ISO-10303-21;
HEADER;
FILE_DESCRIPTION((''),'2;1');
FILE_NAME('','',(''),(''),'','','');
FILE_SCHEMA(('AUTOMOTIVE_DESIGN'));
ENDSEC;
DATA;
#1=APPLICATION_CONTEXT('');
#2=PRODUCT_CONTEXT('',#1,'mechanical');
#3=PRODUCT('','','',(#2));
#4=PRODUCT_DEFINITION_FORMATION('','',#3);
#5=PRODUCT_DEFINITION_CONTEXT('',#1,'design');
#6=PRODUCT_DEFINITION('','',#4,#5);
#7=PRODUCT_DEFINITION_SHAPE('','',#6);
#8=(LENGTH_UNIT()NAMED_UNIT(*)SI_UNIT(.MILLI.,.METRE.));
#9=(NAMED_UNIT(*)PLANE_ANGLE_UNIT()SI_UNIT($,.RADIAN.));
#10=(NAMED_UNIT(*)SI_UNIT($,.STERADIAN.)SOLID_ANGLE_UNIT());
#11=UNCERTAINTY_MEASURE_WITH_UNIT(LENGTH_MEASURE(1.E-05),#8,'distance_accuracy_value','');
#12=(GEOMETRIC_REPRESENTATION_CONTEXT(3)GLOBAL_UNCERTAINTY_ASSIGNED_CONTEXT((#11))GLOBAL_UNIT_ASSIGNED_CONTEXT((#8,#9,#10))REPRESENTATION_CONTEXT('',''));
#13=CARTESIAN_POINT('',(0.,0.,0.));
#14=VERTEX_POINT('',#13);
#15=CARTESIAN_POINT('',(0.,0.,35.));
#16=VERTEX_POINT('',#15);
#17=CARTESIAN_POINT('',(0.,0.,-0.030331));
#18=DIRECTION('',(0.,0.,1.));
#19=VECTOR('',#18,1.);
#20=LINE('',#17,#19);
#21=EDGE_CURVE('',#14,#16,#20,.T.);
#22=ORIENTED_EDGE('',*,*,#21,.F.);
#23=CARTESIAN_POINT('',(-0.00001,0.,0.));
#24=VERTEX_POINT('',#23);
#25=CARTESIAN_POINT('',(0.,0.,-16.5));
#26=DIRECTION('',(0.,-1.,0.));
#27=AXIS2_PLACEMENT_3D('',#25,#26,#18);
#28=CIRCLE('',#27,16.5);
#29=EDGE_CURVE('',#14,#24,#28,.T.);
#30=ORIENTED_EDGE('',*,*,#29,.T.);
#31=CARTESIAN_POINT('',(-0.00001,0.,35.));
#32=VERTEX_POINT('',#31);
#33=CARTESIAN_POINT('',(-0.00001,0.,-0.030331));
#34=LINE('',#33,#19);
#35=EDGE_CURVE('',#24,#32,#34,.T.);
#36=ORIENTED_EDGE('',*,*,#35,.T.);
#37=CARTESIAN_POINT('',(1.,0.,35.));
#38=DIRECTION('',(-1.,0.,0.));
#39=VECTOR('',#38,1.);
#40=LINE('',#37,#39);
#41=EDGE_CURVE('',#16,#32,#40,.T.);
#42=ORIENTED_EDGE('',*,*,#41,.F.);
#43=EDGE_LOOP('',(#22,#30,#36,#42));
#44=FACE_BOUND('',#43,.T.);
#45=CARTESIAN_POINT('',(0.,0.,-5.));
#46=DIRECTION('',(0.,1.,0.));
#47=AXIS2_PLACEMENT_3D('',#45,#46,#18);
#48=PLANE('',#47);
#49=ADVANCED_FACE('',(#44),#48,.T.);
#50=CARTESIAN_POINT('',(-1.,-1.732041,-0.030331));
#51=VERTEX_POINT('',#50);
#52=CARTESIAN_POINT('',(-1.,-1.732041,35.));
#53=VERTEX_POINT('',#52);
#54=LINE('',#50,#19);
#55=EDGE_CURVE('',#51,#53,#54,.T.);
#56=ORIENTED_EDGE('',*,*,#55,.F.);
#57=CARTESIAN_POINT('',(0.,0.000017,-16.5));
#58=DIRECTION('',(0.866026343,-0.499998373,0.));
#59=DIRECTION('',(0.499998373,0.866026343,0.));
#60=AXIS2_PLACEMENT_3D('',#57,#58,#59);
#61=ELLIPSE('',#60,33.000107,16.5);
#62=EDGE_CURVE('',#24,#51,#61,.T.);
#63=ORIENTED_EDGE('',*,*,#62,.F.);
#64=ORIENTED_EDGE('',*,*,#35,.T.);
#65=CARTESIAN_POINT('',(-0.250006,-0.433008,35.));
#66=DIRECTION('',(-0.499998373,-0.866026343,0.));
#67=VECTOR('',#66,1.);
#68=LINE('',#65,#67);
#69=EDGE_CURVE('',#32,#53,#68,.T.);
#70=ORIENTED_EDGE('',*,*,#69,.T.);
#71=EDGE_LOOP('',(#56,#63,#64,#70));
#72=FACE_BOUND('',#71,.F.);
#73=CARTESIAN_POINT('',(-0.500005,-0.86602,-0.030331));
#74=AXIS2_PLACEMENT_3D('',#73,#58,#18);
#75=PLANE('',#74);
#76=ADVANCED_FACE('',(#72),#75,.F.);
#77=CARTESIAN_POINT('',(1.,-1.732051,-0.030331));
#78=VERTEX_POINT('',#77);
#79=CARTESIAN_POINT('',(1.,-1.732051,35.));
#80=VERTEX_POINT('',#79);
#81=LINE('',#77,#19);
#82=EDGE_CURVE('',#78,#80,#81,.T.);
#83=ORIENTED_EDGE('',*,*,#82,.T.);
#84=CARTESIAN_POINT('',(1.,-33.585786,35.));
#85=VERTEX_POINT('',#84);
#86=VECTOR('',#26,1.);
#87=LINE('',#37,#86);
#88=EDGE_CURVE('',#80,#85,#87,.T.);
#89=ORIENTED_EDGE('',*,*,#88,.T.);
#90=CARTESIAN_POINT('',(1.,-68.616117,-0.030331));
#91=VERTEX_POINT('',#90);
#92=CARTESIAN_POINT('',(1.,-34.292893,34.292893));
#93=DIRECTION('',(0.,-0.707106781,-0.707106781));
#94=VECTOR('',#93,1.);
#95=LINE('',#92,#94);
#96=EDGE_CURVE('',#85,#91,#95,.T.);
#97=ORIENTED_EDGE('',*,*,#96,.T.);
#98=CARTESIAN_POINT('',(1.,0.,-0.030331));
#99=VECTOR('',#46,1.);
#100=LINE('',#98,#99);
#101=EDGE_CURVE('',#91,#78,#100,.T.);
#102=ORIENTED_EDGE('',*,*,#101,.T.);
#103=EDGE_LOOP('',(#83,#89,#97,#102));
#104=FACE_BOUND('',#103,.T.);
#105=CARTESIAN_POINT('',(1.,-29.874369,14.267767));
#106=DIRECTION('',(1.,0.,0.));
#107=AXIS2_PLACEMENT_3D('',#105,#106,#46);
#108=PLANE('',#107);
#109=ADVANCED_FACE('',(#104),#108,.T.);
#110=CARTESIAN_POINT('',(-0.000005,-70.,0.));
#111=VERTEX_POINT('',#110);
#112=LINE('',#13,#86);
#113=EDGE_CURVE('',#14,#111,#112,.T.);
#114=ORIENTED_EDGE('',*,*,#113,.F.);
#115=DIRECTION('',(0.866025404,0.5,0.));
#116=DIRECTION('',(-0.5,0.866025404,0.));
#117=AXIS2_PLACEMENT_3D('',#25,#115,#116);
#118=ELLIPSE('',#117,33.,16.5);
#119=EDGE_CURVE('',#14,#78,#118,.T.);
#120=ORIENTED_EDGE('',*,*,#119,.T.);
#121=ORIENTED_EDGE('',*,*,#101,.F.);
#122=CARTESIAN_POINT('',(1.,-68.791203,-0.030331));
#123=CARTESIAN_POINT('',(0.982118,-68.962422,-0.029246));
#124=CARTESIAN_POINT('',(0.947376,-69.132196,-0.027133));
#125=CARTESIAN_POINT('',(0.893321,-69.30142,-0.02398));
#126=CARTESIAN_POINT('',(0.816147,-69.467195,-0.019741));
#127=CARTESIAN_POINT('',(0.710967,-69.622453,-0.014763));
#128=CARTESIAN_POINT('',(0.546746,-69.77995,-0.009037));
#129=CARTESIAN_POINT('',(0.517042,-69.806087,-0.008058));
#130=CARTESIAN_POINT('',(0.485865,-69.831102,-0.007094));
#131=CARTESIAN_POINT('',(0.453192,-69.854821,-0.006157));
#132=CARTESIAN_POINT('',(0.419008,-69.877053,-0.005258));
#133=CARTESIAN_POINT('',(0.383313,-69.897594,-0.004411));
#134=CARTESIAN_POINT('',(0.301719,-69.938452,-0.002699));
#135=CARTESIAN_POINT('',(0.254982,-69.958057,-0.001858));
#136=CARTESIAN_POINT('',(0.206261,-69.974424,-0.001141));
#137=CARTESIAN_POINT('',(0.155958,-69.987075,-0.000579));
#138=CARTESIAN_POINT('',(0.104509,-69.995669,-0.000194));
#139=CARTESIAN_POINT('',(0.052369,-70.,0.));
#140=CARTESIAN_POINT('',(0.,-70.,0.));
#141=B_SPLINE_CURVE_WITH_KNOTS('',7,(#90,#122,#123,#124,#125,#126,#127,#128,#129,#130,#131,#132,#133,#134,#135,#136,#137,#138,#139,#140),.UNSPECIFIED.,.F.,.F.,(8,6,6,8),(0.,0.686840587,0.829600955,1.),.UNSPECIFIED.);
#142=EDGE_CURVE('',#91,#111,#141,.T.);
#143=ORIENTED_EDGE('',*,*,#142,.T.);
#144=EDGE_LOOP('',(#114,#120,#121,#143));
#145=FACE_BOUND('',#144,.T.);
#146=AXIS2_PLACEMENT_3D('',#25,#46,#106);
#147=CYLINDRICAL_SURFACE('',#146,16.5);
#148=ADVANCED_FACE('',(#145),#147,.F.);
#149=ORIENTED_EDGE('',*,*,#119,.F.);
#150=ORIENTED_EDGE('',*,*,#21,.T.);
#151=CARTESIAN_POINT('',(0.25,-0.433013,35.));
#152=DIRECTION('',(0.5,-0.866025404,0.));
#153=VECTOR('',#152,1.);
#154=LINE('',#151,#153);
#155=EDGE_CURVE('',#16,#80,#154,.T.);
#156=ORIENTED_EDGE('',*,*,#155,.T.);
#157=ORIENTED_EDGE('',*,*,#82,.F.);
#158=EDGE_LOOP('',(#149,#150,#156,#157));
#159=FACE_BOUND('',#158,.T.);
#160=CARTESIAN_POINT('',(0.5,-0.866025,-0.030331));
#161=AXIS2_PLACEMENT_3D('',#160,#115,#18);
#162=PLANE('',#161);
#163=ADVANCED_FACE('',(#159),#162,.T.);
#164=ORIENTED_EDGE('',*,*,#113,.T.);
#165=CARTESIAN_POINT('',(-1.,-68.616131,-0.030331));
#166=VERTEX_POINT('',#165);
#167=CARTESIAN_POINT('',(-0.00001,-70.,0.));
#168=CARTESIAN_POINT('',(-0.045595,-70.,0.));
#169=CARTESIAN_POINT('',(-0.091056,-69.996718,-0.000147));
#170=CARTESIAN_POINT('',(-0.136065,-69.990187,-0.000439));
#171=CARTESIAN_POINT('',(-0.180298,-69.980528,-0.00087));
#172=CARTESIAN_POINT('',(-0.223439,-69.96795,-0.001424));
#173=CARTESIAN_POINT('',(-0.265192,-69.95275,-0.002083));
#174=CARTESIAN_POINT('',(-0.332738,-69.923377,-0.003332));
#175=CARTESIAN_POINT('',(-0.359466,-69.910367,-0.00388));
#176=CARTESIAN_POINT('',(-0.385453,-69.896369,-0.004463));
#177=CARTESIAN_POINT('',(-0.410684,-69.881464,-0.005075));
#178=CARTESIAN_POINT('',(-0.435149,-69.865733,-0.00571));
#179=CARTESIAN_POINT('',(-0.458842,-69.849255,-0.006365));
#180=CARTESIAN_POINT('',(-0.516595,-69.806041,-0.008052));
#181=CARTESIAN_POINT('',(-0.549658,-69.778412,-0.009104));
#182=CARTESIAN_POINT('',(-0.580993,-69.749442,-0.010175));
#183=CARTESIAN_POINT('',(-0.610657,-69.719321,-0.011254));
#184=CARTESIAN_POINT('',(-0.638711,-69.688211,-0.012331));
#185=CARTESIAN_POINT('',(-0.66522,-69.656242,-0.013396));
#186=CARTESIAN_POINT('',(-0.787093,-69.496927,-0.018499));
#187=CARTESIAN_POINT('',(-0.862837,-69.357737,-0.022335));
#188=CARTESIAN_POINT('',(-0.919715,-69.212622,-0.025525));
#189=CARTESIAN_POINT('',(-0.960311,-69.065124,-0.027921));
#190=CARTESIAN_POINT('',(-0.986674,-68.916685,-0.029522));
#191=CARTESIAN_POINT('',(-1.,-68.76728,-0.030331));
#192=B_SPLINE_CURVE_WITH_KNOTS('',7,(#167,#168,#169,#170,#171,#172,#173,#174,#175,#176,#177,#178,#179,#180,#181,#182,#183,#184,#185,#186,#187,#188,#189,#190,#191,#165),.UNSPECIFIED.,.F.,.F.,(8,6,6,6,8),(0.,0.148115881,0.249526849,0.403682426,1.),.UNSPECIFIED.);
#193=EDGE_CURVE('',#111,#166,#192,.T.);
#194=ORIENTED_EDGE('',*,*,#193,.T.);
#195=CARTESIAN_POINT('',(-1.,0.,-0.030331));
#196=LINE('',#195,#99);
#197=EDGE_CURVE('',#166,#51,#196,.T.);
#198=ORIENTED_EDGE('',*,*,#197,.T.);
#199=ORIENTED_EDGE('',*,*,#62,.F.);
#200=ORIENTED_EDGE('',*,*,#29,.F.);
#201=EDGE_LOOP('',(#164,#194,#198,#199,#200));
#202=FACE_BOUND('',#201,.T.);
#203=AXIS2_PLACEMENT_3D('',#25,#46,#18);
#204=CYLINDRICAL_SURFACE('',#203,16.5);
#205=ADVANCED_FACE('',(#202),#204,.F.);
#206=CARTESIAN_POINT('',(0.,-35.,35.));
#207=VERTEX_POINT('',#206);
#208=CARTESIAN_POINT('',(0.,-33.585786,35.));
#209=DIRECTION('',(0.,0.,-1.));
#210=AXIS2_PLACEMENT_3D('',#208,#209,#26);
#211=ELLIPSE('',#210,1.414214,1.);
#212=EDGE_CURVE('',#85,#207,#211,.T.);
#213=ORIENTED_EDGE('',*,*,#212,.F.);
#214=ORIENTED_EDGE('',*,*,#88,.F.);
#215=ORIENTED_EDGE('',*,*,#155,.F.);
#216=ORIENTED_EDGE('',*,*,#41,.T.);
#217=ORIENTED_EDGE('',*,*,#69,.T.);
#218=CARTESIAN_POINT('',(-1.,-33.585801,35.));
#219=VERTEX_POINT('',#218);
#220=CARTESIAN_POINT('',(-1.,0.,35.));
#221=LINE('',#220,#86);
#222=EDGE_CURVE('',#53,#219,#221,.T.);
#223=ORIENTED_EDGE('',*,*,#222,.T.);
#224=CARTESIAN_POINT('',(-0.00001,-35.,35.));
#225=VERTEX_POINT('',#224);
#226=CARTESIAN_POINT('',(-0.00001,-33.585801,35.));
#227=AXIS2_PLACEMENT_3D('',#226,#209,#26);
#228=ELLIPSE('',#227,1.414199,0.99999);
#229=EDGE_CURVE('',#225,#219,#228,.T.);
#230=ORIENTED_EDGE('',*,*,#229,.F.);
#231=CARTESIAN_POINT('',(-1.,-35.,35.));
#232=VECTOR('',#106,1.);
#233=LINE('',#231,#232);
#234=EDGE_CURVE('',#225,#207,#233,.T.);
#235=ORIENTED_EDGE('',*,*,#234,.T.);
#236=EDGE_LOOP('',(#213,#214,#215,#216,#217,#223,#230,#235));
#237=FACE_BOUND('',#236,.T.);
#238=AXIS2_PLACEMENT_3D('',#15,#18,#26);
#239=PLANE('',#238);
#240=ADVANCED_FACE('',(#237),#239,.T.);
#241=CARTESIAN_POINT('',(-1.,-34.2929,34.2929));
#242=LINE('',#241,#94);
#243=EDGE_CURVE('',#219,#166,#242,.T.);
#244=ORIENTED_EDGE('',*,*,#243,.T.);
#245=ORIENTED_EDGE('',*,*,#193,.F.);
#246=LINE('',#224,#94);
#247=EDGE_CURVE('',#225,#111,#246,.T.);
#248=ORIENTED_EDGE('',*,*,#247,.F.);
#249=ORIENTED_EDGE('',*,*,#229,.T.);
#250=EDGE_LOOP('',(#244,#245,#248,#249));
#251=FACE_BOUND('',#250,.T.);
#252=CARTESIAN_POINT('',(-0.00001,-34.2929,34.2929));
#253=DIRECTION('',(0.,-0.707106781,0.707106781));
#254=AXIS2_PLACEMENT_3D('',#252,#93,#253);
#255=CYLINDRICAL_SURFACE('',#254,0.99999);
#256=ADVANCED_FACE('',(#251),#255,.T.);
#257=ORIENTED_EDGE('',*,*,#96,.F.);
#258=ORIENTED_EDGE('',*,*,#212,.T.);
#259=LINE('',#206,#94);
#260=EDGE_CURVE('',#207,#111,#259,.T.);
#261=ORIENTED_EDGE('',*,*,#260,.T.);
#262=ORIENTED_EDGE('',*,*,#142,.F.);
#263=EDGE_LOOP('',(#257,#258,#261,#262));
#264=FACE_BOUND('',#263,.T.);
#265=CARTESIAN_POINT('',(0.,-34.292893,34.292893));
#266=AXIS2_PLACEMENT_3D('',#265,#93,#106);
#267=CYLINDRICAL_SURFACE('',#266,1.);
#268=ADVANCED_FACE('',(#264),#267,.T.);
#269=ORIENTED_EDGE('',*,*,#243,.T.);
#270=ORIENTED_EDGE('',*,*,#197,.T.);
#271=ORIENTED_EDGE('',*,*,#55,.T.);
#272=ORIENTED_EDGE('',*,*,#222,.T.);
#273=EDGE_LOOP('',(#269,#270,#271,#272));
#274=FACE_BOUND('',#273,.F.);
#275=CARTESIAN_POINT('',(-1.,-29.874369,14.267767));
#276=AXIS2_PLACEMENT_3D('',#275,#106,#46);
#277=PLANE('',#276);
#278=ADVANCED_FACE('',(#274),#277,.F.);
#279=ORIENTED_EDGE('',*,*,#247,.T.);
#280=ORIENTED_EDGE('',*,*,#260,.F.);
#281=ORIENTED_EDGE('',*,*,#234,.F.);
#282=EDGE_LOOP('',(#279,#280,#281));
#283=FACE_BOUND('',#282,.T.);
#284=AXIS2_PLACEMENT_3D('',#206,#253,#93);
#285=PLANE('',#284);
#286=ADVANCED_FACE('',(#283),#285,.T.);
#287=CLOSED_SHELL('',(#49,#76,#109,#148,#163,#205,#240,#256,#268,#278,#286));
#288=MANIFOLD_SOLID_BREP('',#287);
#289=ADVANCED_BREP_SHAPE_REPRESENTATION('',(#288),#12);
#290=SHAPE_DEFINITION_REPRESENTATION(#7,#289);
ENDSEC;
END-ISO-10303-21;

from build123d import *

# Parameters (mm, degrees)
F0_W     = 70
F0_H     = 5
F1_DEPTH = 1
F2_R     = 1
F3_R     = 0.99999
F5_DEPTH = 75
F6_SIZE2 = 1.7320508076
F6_SIZE  = 1
F7_SIZE2 = 1.732041
F7_SIZE  = 0.99999


# Not quite as in the source:
# - a fillet or chamfer is up to 0.001 mm smaller than in the source, because OpenCascade refuses the exact size


with BuildPart() as f1:
    # F0 (on Right) → F1 (new body, symmetric)
    with BuildSketch(Plane.YZ):
        Polygon((-70, 0), (0, 0), (0, 35), (-35, 35), align=None)
        with Locations((-35, -2.5)):
            Rectangle(F0_W, F0_H)
    extrude(amount=F1_DEPTH, both=True)

    # F2
    f2_edges = [f1.edges().sort_by_distance(p)[0] for p in [
        (1, -52.5, 17.5),
    ]]
    fillet(f2_edges, radius=F2_R)

    # F3 (radius 1 in the source; OpenCascade refuses exactly that, so slightly less here)
    f3_edges = [f1.edges().sort_by_distance(p)[0] for p in [
        (-1, -52.5, 17.5),
    ]]
    fillet(f3_edges, radius=F3_R)

    # F4 (on Front) → F5 (cut, symmetric)
    with BuildSketch(Plane.XZ):
        with BuildLine():
            ThreePointArc((0, 0), (-11.6672618896, -28.1672618896), (16.5, -16.5))
            ThreePointArc((16.5, -16.5), (11.6672618896, -4.8327381104), (0, 0))
        make_face()
    extrude(amount=F5_DEPTH, both=True, mode=Mode.SUBTRACT)

    # F6
    f6_edges = [f1.edges().sort_by_distance(p)[0] for p in [
        (1, 0, 17.484835),
    ]]
    f6_side = f1.faces().sort_by_distance((0, 0, 17.494946))[0]
    chamfer(f6_edges, length=F6_SIZE, length2=F6_SIZE2, reference=f6_side)

    # F7 (size 1 and 1.7320508076 in the source; OpenCascade refuses exactly that, so slightly less here)
    f7_edges = [f1.edges().sort_by_distance(p)[0] for p in [
        (-1, 0, 17.484835),
    ]]
    f7_side = f1.faces().sort_by_distance((-0.500072, 0, 17.494946))[0]
    chamfer(f7_edges, length=F7_SIZE, length2=F7_SIZE2, reference=f7_side)


solid = f1.part
